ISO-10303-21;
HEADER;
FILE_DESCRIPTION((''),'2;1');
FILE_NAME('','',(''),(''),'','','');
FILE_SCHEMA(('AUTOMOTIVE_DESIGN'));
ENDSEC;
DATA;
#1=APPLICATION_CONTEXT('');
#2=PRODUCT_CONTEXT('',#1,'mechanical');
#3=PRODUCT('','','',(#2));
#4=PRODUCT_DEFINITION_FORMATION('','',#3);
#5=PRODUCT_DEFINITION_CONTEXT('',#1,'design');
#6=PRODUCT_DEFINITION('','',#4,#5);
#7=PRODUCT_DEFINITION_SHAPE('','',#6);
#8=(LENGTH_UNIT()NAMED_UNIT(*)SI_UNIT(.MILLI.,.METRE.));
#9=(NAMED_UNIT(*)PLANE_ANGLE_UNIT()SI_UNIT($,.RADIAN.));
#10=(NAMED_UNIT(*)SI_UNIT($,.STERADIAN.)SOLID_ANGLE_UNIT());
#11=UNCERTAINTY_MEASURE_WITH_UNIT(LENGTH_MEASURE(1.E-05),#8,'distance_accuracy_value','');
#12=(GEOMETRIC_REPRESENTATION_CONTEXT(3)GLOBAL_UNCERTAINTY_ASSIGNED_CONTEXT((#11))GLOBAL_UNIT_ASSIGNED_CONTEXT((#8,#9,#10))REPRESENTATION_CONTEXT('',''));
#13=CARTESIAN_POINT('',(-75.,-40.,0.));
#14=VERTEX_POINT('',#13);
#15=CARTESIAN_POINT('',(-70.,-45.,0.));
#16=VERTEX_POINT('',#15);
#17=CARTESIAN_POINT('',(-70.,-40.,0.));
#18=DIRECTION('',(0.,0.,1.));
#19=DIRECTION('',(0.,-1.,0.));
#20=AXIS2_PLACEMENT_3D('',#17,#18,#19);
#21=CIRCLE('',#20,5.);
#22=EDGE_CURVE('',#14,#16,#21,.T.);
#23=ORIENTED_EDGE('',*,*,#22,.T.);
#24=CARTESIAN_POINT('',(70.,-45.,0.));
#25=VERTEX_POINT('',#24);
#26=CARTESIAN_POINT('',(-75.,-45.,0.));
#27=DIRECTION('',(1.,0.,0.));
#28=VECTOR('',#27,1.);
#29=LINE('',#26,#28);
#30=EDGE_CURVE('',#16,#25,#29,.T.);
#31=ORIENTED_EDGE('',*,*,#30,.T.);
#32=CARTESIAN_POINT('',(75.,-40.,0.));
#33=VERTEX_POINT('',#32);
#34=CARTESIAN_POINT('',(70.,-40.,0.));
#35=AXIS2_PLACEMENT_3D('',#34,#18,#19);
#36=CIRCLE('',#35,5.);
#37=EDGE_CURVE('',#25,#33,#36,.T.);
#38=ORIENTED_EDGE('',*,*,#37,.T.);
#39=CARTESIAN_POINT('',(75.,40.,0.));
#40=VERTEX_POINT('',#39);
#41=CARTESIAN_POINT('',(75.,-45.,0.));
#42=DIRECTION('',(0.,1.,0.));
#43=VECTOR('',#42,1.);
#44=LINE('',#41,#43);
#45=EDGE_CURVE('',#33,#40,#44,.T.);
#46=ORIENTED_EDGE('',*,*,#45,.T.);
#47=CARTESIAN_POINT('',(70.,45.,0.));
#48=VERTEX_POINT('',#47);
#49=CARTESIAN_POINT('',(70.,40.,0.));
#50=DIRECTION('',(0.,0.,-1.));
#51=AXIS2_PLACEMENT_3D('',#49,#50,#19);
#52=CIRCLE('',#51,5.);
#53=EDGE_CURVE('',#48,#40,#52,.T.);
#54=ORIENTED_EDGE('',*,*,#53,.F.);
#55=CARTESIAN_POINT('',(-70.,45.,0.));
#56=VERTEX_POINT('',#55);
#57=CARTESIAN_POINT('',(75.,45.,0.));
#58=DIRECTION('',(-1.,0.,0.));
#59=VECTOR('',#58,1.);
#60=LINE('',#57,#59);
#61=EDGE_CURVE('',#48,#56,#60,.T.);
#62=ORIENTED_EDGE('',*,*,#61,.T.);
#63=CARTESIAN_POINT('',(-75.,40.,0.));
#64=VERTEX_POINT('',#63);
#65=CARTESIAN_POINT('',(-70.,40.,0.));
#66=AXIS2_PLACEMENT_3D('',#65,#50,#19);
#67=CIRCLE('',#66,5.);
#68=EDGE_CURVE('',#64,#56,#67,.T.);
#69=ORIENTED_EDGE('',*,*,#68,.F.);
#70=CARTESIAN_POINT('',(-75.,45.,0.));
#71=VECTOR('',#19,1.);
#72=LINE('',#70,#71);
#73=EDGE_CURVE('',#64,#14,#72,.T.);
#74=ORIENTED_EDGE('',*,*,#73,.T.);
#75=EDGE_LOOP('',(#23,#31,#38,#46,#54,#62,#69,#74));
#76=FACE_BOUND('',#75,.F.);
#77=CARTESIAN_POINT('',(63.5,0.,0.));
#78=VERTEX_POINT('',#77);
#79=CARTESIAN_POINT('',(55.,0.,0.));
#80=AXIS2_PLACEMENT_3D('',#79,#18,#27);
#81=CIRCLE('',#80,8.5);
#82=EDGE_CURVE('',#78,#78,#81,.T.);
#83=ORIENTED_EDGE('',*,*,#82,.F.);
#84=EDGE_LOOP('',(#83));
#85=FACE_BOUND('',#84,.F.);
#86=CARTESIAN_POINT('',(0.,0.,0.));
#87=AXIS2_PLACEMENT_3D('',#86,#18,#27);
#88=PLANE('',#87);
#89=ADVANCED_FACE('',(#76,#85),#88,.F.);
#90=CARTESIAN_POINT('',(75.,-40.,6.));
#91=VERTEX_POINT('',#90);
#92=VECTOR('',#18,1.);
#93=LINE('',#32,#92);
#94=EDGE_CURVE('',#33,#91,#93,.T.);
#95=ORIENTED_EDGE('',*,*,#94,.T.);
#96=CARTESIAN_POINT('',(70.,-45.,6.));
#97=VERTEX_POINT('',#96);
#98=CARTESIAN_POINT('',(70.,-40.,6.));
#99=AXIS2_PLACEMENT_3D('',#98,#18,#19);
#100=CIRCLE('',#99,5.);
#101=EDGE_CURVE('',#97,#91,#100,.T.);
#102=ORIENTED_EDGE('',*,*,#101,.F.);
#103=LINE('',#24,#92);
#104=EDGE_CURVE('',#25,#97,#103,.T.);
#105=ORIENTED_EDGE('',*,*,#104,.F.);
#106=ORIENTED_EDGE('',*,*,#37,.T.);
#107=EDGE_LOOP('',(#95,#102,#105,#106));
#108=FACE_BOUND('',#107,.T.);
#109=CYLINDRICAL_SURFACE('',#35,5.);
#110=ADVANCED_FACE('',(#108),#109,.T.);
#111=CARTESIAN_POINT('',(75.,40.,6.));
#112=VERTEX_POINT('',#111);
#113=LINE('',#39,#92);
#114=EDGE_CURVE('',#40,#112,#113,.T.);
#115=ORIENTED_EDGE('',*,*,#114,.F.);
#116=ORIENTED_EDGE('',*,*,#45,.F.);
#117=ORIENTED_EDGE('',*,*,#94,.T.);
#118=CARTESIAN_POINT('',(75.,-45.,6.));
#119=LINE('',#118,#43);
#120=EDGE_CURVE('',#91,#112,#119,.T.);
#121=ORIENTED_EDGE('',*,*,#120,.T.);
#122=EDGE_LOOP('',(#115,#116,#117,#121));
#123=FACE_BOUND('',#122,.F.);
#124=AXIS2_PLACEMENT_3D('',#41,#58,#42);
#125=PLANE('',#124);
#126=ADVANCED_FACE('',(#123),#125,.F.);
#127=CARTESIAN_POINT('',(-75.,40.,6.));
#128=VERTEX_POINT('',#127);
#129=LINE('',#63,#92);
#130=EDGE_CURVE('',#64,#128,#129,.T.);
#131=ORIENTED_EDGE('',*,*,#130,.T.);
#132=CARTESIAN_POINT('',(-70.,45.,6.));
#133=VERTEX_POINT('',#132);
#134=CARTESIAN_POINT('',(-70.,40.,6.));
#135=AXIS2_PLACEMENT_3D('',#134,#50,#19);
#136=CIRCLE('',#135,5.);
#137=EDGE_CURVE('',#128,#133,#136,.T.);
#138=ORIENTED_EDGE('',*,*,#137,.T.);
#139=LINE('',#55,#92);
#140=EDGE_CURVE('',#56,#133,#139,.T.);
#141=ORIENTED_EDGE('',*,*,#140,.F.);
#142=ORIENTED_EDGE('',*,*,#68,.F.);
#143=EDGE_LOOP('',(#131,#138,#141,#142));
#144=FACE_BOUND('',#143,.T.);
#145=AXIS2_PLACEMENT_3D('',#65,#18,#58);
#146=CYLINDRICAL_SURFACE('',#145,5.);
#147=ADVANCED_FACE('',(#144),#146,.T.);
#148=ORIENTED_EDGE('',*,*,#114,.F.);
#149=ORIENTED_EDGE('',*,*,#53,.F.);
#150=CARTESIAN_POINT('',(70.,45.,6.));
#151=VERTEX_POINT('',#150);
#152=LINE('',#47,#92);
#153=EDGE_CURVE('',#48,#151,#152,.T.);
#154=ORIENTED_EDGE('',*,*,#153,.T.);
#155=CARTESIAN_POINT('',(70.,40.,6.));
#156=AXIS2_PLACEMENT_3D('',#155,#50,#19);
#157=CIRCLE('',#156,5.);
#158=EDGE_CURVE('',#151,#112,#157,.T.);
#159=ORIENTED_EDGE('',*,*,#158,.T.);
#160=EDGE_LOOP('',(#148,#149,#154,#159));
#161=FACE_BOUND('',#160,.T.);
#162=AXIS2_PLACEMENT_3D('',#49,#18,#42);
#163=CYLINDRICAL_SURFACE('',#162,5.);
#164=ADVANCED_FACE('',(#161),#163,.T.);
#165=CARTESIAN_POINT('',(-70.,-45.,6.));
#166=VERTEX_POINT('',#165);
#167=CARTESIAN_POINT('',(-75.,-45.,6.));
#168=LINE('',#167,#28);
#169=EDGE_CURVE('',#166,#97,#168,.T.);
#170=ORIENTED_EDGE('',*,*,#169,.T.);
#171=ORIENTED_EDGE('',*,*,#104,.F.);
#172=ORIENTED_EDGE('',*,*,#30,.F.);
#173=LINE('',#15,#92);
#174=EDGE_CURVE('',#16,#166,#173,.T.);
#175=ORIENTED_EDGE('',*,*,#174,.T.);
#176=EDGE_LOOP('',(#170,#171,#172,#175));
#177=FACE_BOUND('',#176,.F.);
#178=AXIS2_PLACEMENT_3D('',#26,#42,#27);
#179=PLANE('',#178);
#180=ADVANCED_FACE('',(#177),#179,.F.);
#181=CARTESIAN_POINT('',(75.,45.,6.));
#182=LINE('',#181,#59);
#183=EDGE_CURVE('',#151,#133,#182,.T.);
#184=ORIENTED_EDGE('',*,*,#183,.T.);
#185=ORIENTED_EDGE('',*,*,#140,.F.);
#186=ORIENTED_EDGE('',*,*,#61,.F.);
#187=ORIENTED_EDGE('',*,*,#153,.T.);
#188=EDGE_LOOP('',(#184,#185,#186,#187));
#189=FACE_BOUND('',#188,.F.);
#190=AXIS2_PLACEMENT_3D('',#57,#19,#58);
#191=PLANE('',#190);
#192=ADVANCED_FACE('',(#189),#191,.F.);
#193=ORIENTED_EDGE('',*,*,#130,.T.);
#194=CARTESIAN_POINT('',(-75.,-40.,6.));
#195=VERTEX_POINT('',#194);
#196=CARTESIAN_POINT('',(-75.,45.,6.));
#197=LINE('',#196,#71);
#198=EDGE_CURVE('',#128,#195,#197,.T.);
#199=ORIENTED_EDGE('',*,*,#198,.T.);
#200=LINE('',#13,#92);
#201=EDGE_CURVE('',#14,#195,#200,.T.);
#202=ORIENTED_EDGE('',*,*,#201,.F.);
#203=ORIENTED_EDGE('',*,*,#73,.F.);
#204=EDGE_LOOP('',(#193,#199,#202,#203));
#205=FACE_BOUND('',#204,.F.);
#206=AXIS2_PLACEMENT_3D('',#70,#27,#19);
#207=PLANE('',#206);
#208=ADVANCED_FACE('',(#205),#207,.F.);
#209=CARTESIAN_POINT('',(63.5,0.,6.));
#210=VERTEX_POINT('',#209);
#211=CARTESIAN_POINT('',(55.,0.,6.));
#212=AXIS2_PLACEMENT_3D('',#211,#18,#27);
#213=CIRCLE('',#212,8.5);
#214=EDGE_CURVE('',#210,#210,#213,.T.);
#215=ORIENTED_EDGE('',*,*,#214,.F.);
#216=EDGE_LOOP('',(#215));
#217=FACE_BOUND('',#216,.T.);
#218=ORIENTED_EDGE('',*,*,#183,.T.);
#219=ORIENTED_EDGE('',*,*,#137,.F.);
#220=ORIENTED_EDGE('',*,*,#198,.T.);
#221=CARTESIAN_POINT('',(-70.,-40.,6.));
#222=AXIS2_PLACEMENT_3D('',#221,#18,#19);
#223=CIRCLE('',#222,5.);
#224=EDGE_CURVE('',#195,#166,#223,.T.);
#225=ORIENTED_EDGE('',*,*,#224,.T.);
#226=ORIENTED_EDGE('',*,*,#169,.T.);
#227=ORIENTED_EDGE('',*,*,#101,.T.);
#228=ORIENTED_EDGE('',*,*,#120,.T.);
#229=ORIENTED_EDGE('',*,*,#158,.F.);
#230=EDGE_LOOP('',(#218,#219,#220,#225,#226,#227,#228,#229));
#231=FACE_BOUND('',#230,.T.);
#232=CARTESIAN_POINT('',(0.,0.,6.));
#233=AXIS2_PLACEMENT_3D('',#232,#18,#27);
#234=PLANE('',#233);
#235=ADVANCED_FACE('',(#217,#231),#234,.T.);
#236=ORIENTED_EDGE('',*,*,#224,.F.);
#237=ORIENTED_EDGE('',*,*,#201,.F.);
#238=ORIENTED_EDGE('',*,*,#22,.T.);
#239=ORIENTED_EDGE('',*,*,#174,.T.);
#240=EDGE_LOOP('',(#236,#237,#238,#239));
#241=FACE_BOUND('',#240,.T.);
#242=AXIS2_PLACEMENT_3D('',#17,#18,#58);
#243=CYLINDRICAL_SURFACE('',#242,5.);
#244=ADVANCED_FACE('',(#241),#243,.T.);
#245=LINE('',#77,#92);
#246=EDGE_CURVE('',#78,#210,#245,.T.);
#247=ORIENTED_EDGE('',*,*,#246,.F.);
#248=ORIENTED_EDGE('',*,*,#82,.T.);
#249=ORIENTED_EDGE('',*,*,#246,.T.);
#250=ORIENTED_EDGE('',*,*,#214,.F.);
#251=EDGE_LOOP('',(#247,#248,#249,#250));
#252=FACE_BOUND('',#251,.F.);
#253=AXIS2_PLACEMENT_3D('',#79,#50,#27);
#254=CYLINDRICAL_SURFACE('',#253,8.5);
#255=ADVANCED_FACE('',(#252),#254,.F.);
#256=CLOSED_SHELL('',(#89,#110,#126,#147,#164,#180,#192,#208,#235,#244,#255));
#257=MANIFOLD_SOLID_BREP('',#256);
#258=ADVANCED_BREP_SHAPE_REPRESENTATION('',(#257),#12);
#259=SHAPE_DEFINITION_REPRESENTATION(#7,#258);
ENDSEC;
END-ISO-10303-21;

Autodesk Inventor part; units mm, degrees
ref_plane "YZ Plane" through (0, 0, 0) normal (1, 0, 0) x (0, 1, 0)
ref_plane "XZ Plane" through (0, 0, 0) normal (0, 1, 0) x (-1, 0, 0)
ref_plane "XY Plane" through (0, 0, 0) normal (0, 0, 1) x (1, 0, 0)
sketch "Sketch1" plane through (0, 0, 0) normal (0, 0, 1) x (1, 0, 0)
  line L0 (-75, -45) -> (75, -45)
  line L1 (75, -45) -> (75, 45)
  line L2 (75, 45) -> (-75, 45)
  line L3 (-75, 45) -> (-75, -45)
  line L4 (-75, -45) -> (75, 45) construction
  line L5 (75, -45) -> (-75, 45) construction
  circle A0 centre (55, -25) radius 8.5
  circle A1 centre (55, 25) radius 8.5
  line L6 (0, 0) -> (75, 0) construction
  circle A2 centre (55, 0) radius 8.5
  dimension "d0" = 150
  dimension "d1" = 90
  dimension "d23" = 17
  dimension "d25" = 20
  dimension "d26" = 20
extrude "Plate1" add sketch "Sketch1" along normal blind 6 contours L3 L2 L1 L0 | A0 | A1
fillet "Corner Round2" radius 5 4 edges at (-75, 45, 3) (-75, -45, 3) (75, -45, 3) (75, 45, 3)
equation "\"d26\" = d25"
equation "\"d2\" = Thickness"
equation "\"BendReliefWidth\" = Thickness"
equation "\"BendReliefDepth\" = 0.5 * Thickness"
equation "\"CornerReliefSize\" = 4 * Thickness"
equation "\"MinimumRemnant\" = 2 * Thickness"
equation "\"TransitionRadius\" = BendRadius"
equation "\"JacobiRadiusSize\" = BendRadius"
equation "\"GapSize\" = Thickness"
equation "\"Thickness\" = 6"
equation "\"BendRadius\" = 5"
properties part number "PRS 1695 leg floor plate" material "Stainless Steel"
